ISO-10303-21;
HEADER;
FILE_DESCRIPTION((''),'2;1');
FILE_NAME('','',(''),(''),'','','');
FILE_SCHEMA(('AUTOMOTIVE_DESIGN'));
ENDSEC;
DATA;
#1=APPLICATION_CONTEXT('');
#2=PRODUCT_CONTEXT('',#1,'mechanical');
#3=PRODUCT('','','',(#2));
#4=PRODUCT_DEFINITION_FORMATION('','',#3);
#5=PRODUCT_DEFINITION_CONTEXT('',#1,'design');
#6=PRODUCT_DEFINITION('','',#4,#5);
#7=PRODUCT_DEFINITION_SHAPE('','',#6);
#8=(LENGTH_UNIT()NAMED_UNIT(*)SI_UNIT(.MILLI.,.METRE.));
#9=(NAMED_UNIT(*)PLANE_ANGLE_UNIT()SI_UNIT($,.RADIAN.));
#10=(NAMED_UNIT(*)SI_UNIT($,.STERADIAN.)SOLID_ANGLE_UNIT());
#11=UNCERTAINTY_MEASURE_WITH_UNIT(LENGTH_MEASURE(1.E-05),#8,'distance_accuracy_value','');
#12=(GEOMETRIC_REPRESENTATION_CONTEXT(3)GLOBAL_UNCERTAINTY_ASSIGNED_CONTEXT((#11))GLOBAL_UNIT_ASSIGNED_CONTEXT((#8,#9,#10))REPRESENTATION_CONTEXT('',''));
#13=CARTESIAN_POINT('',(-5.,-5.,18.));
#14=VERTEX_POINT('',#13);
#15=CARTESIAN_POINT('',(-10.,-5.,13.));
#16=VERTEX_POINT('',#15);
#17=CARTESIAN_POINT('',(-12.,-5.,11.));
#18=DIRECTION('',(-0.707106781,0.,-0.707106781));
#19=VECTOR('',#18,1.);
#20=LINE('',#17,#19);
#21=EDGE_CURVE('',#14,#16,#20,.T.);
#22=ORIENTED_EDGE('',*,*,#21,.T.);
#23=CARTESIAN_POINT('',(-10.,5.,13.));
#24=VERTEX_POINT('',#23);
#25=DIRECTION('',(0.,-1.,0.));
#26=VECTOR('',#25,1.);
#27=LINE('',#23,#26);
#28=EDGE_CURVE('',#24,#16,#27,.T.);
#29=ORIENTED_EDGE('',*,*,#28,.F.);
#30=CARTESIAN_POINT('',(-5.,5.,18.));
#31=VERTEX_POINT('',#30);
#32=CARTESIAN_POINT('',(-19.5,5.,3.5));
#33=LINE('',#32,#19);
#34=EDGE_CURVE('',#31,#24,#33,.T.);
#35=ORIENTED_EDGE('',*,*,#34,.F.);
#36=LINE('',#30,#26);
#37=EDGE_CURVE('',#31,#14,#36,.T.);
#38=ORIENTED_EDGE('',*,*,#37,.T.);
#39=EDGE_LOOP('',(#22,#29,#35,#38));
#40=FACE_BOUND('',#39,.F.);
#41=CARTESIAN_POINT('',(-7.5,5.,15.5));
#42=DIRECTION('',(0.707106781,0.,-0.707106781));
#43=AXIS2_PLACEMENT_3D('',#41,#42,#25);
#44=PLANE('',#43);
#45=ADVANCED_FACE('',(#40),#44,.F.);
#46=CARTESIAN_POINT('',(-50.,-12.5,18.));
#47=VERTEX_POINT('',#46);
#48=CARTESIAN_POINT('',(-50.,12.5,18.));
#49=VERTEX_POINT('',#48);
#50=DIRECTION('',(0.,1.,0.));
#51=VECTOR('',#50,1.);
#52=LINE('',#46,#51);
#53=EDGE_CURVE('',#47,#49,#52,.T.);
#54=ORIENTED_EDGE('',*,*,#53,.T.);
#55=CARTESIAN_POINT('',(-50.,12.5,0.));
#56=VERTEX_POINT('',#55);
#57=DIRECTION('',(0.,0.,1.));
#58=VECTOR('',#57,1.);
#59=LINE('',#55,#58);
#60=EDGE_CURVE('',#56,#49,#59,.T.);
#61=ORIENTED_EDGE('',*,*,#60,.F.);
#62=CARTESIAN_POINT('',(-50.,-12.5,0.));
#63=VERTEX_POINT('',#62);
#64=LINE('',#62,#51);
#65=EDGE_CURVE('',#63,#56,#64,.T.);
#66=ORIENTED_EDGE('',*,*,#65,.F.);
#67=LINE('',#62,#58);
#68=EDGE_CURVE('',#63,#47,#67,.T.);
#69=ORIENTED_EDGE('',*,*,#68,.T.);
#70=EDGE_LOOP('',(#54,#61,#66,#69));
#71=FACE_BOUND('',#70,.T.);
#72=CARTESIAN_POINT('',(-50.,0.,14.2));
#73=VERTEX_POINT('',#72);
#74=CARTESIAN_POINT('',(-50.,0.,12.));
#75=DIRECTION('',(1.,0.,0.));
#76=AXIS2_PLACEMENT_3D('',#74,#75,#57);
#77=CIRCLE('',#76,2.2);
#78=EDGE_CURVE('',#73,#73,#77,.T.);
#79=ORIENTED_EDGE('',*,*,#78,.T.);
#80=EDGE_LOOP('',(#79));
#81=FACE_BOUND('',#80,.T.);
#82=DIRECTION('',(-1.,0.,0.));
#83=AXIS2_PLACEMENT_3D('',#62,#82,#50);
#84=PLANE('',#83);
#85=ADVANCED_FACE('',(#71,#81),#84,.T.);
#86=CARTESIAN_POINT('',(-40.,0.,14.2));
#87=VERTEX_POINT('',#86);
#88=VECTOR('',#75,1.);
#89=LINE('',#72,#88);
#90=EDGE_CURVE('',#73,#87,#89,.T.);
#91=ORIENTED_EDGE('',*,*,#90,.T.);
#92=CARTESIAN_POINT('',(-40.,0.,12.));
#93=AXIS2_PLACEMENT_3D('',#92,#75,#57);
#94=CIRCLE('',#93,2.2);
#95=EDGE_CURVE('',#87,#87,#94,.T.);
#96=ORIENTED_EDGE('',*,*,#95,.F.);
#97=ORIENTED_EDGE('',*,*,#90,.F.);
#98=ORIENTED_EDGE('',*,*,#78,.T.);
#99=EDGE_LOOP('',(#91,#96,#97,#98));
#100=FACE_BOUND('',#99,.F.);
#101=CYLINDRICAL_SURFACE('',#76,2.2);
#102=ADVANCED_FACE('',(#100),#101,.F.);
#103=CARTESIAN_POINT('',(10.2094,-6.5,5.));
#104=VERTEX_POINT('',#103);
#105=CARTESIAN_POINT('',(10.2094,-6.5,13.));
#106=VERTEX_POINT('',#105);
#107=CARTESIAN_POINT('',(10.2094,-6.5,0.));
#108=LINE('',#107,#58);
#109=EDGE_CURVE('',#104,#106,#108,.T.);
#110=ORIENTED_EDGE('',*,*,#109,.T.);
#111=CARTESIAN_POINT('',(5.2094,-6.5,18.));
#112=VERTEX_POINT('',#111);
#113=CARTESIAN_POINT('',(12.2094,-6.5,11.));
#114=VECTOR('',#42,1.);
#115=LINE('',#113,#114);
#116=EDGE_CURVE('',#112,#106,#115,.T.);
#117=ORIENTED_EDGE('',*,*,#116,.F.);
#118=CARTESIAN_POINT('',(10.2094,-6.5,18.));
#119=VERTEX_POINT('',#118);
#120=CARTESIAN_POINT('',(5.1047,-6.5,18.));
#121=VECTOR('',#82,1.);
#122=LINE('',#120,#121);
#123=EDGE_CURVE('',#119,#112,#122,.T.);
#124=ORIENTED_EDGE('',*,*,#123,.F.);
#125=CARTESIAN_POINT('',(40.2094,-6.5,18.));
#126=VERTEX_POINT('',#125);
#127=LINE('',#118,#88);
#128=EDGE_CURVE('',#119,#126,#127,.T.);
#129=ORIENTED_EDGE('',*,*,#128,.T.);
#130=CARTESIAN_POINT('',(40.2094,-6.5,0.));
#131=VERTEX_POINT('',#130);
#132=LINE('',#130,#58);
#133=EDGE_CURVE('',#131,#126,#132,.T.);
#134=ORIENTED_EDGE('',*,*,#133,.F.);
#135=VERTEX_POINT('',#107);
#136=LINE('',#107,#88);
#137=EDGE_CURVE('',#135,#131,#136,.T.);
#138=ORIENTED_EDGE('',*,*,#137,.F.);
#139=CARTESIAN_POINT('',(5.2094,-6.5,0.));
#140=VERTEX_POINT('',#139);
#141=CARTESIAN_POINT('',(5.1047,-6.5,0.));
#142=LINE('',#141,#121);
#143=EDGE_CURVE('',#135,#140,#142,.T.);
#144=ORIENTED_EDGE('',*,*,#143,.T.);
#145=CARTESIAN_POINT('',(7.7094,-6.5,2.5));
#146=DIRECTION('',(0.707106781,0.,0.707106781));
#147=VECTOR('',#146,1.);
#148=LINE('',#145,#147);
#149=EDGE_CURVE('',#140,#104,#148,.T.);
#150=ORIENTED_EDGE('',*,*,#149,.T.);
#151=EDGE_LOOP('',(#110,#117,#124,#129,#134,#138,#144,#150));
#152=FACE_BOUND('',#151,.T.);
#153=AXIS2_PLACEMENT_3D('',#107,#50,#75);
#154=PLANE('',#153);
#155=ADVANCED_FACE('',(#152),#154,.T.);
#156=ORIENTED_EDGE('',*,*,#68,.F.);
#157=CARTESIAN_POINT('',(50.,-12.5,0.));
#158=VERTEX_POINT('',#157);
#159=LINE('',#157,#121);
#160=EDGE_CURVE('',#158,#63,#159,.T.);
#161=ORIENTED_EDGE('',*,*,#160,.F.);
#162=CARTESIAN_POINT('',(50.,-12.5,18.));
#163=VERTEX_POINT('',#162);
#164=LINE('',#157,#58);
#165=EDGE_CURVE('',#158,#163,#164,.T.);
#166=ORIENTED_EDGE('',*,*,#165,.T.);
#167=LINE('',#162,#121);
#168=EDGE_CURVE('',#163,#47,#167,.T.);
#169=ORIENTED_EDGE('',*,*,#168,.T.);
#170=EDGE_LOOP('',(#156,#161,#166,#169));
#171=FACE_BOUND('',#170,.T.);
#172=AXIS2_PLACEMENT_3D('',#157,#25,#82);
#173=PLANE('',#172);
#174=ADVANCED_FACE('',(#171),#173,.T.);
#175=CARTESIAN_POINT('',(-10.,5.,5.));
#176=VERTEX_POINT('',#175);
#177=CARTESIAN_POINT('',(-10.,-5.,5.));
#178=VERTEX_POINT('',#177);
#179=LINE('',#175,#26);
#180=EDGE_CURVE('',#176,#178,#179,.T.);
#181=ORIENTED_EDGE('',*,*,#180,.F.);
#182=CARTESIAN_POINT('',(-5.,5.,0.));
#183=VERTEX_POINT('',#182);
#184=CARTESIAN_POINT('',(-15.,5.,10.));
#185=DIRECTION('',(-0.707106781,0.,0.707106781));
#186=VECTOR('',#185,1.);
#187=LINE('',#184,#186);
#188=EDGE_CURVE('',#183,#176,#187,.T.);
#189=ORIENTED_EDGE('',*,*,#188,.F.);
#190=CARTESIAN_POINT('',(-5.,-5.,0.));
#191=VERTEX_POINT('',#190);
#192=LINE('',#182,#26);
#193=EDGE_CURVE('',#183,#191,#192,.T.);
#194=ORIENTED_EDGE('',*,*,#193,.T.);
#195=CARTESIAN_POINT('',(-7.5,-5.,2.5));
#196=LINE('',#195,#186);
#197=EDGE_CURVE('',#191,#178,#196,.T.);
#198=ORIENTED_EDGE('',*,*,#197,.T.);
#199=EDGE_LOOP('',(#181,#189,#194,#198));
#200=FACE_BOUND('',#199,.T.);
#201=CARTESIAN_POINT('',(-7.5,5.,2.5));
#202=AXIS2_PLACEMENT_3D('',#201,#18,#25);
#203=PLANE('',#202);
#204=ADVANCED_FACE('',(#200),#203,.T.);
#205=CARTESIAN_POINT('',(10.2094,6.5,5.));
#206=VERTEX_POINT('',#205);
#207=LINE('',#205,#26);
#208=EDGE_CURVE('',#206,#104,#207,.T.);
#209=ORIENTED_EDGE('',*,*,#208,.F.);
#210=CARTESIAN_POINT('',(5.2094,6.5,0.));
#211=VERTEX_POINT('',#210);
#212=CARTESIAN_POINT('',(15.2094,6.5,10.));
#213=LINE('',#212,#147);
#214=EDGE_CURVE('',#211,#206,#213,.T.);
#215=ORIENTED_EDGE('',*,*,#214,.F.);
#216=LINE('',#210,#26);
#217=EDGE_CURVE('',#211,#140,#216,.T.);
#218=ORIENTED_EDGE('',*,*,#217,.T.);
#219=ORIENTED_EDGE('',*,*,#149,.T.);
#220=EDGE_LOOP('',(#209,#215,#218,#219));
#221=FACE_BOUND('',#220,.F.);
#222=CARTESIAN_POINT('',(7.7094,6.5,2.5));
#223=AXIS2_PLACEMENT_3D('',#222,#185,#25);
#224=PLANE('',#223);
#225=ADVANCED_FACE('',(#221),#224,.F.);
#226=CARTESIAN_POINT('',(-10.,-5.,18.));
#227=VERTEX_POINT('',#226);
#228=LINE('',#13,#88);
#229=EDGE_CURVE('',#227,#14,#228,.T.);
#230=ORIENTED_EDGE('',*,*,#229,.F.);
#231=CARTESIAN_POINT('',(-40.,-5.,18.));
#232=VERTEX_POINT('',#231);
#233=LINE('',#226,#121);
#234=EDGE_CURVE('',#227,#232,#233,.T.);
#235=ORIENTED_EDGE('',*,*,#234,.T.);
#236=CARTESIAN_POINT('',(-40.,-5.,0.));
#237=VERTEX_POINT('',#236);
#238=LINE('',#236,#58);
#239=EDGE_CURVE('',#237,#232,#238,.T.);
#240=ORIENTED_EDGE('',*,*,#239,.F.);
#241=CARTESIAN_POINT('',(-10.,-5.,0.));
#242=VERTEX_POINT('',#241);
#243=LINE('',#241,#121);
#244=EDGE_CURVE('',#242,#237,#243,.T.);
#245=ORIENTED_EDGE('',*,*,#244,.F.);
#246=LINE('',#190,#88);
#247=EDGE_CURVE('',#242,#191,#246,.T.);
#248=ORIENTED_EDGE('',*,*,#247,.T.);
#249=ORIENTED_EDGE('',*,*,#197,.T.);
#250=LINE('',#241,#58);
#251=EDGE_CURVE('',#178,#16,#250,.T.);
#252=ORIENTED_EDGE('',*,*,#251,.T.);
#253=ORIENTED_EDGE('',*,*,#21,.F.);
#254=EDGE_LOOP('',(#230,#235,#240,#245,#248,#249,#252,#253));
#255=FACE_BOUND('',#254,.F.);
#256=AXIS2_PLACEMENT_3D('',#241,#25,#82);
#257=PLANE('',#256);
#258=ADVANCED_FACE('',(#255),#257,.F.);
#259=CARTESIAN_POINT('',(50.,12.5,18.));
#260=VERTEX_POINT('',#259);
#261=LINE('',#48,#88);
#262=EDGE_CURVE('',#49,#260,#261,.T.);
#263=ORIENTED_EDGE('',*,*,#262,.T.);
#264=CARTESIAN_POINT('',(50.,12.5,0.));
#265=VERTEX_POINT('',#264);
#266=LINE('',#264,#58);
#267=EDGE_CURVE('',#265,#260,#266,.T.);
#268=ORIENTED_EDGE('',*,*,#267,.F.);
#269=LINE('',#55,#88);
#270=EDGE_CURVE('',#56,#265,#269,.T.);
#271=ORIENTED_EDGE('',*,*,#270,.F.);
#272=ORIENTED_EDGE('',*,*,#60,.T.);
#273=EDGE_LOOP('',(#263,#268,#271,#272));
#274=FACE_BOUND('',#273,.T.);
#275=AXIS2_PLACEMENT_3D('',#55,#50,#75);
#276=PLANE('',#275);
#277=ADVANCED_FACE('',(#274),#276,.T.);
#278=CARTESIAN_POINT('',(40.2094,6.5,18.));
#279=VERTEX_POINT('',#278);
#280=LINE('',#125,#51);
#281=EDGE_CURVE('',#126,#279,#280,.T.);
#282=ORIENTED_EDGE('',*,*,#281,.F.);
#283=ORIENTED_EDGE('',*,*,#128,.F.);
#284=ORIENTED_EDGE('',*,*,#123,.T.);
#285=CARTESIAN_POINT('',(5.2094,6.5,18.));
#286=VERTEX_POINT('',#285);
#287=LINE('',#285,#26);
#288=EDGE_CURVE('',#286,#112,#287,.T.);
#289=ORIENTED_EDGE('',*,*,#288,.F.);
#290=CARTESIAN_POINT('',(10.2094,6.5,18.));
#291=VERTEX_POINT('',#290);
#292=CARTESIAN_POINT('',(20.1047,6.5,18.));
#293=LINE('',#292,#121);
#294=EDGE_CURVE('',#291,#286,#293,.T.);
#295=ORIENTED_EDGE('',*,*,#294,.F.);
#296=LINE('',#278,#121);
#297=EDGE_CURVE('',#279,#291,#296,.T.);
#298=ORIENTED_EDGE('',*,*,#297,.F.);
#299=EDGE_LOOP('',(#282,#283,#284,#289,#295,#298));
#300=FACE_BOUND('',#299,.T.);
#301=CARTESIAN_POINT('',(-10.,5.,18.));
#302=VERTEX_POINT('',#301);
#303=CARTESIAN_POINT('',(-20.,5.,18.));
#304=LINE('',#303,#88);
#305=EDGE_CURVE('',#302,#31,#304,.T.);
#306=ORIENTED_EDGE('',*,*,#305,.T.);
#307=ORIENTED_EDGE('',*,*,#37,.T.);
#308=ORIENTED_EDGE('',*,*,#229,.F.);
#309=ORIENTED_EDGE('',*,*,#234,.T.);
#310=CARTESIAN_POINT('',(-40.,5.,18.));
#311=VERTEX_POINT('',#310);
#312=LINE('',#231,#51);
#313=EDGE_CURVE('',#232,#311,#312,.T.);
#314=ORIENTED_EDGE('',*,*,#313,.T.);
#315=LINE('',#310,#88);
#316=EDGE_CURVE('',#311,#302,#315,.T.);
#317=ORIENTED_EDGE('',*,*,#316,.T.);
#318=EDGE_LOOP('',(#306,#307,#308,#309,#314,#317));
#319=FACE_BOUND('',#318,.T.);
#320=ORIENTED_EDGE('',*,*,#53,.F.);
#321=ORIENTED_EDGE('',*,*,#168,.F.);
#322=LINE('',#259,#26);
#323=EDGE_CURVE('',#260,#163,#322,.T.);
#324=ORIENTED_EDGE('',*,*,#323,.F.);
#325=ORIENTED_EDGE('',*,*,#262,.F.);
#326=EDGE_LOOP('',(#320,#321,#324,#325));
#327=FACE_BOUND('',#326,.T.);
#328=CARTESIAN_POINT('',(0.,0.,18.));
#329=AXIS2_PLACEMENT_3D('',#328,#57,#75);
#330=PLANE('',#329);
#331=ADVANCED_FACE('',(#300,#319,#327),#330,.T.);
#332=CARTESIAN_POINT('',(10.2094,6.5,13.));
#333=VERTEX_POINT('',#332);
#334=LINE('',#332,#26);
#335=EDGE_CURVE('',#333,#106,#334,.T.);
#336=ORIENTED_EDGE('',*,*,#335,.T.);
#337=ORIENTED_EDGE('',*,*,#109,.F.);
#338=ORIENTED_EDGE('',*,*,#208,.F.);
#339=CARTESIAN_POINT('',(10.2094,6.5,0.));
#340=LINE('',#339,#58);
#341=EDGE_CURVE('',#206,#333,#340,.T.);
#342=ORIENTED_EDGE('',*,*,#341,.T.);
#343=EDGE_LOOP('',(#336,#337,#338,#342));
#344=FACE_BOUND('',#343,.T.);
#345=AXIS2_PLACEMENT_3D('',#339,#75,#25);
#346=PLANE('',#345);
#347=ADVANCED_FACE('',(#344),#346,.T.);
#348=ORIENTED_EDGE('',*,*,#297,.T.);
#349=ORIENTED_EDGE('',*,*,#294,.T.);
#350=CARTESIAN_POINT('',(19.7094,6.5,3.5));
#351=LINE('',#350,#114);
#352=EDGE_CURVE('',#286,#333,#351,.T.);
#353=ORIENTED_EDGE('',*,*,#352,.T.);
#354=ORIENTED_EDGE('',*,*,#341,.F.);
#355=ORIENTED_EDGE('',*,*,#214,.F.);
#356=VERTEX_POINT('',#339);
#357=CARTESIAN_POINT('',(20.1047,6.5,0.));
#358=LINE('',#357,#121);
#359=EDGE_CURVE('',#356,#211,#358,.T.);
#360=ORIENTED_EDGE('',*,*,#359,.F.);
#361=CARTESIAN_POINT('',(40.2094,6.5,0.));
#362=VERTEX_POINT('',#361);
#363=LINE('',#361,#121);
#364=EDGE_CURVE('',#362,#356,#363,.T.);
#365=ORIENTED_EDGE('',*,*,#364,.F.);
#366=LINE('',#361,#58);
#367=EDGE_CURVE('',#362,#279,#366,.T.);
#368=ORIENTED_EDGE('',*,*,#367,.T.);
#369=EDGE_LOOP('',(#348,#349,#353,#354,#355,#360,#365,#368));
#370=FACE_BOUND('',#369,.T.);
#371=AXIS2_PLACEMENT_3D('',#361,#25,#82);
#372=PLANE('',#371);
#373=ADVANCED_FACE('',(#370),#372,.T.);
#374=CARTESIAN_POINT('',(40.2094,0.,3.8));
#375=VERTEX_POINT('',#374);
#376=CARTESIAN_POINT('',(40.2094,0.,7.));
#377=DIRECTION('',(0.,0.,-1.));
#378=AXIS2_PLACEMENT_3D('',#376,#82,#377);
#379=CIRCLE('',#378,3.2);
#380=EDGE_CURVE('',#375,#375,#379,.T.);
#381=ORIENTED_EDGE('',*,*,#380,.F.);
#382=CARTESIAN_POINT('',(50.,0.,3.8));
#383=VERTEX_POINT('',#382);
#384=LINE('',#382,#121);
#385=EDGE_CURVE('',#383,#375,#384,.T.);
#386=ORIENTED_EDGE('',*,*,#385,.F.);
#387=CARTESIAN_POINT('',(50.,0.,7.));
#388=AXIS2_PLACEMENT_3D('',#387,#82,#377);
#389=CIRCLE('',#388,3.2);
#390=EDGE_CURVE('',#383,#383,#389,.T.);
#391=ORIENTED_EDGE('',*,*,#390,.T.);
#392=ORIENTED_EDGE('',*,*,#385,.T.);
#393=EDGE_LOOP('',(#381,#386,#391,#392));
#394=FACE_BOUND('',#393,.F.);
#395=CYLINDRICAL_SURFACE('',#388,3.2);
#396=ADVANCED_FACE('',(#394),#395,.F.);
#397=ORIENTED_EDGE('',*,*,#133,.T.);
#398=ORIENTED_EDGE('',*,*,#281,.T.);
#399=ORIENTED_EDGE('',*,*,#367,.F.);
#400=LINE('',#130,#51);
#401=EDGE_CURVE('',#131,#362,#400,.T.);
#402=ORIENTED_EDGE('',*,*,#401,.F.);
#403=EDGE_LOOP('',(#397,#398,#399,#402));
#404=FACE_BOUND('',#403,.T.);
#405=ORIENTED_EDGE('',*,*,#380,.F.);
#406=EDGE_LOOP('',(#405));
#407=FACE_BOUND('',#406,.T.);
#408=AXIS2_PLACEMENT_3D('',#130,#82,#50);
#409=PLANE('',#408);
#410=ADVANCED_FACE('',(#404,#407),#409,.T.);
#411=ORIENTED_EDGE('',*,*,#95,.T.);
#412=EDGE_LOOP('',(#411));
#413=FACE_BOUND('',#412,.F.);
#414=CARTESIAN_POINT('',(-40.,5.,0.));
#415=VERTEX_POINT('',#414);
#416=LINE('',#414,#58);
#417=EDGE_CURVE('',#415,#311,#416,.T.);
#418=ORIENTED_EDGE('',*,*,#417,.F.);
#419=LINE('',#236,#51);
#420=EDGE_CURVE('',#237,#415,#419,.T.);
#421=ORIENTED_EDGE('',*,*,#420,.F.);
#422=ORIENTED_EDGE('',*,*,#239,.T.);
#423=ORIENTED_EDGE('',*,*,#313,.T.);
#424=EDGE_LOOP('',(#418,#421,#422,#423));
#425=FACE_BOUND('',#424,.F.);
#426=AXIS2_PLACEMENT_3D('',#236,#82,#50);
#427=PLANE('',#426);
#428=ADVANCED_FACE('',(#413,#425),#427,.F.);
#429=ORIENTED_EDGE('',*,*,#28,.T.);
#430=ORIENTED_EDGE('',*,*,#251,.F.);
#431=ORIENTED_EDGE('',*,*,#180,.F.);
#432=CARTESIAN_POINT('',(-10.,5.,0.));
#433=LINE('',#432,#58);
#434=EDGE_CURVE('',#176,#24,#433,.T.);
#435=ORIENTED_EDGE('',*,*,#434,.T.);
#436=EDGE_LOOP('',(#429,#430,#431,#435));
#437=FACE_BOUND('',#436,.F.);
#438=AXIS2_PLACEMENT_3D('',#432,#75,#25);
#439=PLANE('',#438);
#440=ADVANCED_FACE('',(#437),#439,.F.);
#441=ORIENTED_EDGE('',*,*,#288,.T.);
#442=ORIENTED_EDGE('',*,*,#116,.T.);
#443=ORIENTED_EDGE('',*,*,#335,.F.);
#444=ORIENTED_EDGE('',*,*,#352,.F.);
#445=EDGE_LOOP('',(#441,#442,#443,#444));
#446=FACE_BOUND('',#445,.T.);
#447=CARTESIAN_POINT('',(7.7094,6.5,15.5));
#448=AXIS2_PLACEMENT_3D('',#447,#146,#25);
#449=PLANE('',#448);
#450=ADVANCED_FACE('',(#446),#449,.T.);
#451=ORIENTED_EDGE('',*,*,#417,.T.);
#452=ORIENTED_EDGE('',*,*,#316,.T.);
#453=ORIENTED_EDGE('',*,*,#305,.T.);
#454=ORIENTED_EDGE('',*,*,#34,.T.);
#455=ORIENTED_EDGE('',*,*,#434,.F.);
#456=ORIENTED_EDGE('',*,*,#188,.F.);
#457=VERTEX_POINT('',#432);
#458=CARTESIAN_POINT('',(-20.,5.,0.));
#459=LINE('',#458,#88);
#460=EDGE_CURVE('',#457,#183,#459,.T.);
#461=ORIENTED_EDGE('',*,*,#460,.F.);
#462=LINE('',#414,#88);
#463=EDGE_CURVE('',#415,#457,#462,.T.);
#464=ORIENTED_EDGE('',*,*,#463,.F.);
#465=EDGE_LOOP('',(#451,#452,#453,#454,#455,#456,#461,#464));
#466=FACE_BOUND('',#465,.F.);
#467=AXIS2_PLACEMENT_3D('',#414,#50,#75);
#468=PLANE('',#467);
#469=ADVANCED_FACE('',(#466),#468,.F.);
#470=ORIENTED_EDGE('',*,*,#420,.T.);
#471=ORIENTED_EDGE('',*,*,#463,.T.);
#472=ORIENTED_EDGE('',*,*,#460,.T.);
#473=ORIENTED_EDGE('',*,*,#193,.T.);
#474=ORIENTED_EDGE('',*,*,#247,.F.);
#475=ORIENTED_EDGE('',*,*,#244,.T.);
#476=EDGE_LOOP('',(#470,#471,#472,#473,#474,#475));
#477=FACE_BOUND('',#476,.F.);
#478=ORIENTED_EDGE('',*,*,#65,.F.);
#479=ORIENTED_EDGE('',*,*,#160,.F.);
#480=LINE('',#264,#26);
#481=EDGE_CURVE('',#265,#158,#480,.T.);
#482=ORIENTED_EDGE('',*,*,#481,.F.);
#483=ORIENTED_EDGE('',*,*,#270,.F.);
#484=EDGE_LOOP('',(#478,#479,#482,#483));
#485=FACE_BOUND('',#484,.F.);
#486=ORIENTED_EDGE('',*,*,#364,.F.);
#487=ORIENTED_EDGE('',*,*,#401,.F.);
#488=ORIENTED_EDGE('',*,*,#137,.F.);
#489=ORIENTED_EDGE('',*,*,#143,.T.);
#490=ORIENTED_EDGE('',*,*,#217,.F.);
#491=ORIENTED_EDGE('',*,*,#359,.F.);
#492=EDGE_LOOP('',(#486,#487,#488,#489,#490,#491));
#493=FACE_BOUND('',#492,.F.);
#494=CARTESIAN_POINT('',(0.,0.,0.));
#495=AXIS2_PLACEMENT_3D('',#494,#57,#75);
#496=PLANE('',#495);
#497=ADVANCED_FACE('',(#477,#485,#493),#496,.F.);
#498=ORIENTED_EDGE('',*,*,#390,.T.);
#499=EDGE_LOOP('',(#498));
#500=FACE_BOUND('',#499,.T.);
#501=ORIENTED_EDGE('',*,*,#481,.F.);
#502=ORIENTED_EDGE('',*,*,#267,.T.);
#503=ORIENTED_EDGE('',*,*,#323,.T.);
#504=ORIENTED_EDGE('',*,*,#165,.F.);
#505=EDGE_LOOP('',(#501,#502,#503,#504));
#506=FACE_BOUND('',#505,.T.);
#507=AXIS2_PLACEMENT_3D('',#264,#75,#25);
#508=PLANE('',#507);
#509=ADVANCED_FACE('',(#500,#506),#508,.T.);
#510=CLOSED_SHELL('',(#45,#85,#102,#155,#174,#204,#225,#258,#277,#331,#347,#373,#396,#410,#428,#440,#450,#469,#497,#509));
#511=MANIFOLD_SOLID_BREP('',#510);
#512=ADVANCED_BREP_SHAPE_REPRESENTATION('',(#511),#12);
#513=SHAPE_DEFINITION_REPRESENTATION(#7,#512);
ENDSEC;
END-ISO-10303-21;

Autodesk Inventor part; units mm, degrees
ref_plane "YZ Plane" through (0, 0, 0) normal (1, 0, 0) x (0, 1, 0)
ref_plane "XZ Plane" through (0, 0, 0) normal (0, 1, 0) x (-1, 0, 0)
ref_plane "XY Plane" through (0, 0, 0) normal (0, 0, 1) x (1, 0, 0)
sketch "Sketch1" plane through (0, 0, 0) normal (0, 0, 1) x (1, 0, 0)
  line L0 (50, -12.5) -> (-50, -12.5)
  line L1 (-50, -12.5) -> (-50, 12.5)
  line L2 (-50, 12.5) -> (50, 12.5)
  line L3 (50, 12.5) -> (50, -12.5)
  line L4 (50, -12.5) -> (-50, 12.5) construction
  line L5 (-50, -12.5) -> (50, 12.5) construction
  line L6 (-10, -5) -> (-40, -5)
  line L7 (-40, -5) -> (-40, 5)
  line L8 (-40, 5) -> (-10, 5)
  line L9 (-10, 5) -> (-10, -5)
  line L10 (-10, -5) -> (-40, 5) construction
  line L11 (-40, -5) -> (-10, 5) construction
  line L12 (10.2094, -6.5) -> (40.2094, -6.5)
  line L13 (40.2094, -6.5) -> (40.2094, 6.5)
  line L14 (40.2094, 6.5) -> (10.2094, 6.5)
  line L15 (10.2094, 6.5) -> (10.2094, -6.5)
  line L16 (10.2094, -6.5) -> (40.2094, 6.5) construction
  line L17 (40.2094, -6.5) -> (10.2094, 6.5) construction
  point P0 (0, 0)
  point P1 (-40, 0)
  point P2 (40, 0)
  point P3 (-25, 0)
  point P4 (25.2094, 0)
  dimension "d0" = 100
  dimension "d1" = 25
  dimension "d2" = 10
  dimension "d3" = 13
extrude "Extrusion1" add sketch "Sketch1" along normal blind 18
sketch "M6 thru" plane through (50, -12.5, 0) normal (1, 0, 0) x (0, 0, -1)
  line L0 (0, 25) -> (0, 0) projected
  point P0 (0, 12.5)
  point P1 (-7, 12.5)
  dimension "d13" = 7
sketch "Sketch3" plane through (-50, -12.5, 0) normal (-1, 0, 0) x (0, 0, 1)
  line L0 (0, 0) -> (0, 25) projected
  point P0 (0, 12.5)
  point P1 (12, 12.5)
  dimension "d14" = 12
hole "M6 thru-hole" at (50, 0, 7) direction (-1, 0, 0) diameter 6.4 end up to surface
hole "M4 thru-hole" at (-50, 0, 12) direction (1, 0, 0) diameter 4.4 end up to surface
chamfer "Chamfer1" distance 5 angle 45 4 edges at (-10, 0, 18) (10.2094, 0, 18) (-10, 0, 0) (10.2094, 0, 0)
properties part number "cage2table-mount-M4(top)-M6(bottom)-H100mm-HoleOffset5mm"
